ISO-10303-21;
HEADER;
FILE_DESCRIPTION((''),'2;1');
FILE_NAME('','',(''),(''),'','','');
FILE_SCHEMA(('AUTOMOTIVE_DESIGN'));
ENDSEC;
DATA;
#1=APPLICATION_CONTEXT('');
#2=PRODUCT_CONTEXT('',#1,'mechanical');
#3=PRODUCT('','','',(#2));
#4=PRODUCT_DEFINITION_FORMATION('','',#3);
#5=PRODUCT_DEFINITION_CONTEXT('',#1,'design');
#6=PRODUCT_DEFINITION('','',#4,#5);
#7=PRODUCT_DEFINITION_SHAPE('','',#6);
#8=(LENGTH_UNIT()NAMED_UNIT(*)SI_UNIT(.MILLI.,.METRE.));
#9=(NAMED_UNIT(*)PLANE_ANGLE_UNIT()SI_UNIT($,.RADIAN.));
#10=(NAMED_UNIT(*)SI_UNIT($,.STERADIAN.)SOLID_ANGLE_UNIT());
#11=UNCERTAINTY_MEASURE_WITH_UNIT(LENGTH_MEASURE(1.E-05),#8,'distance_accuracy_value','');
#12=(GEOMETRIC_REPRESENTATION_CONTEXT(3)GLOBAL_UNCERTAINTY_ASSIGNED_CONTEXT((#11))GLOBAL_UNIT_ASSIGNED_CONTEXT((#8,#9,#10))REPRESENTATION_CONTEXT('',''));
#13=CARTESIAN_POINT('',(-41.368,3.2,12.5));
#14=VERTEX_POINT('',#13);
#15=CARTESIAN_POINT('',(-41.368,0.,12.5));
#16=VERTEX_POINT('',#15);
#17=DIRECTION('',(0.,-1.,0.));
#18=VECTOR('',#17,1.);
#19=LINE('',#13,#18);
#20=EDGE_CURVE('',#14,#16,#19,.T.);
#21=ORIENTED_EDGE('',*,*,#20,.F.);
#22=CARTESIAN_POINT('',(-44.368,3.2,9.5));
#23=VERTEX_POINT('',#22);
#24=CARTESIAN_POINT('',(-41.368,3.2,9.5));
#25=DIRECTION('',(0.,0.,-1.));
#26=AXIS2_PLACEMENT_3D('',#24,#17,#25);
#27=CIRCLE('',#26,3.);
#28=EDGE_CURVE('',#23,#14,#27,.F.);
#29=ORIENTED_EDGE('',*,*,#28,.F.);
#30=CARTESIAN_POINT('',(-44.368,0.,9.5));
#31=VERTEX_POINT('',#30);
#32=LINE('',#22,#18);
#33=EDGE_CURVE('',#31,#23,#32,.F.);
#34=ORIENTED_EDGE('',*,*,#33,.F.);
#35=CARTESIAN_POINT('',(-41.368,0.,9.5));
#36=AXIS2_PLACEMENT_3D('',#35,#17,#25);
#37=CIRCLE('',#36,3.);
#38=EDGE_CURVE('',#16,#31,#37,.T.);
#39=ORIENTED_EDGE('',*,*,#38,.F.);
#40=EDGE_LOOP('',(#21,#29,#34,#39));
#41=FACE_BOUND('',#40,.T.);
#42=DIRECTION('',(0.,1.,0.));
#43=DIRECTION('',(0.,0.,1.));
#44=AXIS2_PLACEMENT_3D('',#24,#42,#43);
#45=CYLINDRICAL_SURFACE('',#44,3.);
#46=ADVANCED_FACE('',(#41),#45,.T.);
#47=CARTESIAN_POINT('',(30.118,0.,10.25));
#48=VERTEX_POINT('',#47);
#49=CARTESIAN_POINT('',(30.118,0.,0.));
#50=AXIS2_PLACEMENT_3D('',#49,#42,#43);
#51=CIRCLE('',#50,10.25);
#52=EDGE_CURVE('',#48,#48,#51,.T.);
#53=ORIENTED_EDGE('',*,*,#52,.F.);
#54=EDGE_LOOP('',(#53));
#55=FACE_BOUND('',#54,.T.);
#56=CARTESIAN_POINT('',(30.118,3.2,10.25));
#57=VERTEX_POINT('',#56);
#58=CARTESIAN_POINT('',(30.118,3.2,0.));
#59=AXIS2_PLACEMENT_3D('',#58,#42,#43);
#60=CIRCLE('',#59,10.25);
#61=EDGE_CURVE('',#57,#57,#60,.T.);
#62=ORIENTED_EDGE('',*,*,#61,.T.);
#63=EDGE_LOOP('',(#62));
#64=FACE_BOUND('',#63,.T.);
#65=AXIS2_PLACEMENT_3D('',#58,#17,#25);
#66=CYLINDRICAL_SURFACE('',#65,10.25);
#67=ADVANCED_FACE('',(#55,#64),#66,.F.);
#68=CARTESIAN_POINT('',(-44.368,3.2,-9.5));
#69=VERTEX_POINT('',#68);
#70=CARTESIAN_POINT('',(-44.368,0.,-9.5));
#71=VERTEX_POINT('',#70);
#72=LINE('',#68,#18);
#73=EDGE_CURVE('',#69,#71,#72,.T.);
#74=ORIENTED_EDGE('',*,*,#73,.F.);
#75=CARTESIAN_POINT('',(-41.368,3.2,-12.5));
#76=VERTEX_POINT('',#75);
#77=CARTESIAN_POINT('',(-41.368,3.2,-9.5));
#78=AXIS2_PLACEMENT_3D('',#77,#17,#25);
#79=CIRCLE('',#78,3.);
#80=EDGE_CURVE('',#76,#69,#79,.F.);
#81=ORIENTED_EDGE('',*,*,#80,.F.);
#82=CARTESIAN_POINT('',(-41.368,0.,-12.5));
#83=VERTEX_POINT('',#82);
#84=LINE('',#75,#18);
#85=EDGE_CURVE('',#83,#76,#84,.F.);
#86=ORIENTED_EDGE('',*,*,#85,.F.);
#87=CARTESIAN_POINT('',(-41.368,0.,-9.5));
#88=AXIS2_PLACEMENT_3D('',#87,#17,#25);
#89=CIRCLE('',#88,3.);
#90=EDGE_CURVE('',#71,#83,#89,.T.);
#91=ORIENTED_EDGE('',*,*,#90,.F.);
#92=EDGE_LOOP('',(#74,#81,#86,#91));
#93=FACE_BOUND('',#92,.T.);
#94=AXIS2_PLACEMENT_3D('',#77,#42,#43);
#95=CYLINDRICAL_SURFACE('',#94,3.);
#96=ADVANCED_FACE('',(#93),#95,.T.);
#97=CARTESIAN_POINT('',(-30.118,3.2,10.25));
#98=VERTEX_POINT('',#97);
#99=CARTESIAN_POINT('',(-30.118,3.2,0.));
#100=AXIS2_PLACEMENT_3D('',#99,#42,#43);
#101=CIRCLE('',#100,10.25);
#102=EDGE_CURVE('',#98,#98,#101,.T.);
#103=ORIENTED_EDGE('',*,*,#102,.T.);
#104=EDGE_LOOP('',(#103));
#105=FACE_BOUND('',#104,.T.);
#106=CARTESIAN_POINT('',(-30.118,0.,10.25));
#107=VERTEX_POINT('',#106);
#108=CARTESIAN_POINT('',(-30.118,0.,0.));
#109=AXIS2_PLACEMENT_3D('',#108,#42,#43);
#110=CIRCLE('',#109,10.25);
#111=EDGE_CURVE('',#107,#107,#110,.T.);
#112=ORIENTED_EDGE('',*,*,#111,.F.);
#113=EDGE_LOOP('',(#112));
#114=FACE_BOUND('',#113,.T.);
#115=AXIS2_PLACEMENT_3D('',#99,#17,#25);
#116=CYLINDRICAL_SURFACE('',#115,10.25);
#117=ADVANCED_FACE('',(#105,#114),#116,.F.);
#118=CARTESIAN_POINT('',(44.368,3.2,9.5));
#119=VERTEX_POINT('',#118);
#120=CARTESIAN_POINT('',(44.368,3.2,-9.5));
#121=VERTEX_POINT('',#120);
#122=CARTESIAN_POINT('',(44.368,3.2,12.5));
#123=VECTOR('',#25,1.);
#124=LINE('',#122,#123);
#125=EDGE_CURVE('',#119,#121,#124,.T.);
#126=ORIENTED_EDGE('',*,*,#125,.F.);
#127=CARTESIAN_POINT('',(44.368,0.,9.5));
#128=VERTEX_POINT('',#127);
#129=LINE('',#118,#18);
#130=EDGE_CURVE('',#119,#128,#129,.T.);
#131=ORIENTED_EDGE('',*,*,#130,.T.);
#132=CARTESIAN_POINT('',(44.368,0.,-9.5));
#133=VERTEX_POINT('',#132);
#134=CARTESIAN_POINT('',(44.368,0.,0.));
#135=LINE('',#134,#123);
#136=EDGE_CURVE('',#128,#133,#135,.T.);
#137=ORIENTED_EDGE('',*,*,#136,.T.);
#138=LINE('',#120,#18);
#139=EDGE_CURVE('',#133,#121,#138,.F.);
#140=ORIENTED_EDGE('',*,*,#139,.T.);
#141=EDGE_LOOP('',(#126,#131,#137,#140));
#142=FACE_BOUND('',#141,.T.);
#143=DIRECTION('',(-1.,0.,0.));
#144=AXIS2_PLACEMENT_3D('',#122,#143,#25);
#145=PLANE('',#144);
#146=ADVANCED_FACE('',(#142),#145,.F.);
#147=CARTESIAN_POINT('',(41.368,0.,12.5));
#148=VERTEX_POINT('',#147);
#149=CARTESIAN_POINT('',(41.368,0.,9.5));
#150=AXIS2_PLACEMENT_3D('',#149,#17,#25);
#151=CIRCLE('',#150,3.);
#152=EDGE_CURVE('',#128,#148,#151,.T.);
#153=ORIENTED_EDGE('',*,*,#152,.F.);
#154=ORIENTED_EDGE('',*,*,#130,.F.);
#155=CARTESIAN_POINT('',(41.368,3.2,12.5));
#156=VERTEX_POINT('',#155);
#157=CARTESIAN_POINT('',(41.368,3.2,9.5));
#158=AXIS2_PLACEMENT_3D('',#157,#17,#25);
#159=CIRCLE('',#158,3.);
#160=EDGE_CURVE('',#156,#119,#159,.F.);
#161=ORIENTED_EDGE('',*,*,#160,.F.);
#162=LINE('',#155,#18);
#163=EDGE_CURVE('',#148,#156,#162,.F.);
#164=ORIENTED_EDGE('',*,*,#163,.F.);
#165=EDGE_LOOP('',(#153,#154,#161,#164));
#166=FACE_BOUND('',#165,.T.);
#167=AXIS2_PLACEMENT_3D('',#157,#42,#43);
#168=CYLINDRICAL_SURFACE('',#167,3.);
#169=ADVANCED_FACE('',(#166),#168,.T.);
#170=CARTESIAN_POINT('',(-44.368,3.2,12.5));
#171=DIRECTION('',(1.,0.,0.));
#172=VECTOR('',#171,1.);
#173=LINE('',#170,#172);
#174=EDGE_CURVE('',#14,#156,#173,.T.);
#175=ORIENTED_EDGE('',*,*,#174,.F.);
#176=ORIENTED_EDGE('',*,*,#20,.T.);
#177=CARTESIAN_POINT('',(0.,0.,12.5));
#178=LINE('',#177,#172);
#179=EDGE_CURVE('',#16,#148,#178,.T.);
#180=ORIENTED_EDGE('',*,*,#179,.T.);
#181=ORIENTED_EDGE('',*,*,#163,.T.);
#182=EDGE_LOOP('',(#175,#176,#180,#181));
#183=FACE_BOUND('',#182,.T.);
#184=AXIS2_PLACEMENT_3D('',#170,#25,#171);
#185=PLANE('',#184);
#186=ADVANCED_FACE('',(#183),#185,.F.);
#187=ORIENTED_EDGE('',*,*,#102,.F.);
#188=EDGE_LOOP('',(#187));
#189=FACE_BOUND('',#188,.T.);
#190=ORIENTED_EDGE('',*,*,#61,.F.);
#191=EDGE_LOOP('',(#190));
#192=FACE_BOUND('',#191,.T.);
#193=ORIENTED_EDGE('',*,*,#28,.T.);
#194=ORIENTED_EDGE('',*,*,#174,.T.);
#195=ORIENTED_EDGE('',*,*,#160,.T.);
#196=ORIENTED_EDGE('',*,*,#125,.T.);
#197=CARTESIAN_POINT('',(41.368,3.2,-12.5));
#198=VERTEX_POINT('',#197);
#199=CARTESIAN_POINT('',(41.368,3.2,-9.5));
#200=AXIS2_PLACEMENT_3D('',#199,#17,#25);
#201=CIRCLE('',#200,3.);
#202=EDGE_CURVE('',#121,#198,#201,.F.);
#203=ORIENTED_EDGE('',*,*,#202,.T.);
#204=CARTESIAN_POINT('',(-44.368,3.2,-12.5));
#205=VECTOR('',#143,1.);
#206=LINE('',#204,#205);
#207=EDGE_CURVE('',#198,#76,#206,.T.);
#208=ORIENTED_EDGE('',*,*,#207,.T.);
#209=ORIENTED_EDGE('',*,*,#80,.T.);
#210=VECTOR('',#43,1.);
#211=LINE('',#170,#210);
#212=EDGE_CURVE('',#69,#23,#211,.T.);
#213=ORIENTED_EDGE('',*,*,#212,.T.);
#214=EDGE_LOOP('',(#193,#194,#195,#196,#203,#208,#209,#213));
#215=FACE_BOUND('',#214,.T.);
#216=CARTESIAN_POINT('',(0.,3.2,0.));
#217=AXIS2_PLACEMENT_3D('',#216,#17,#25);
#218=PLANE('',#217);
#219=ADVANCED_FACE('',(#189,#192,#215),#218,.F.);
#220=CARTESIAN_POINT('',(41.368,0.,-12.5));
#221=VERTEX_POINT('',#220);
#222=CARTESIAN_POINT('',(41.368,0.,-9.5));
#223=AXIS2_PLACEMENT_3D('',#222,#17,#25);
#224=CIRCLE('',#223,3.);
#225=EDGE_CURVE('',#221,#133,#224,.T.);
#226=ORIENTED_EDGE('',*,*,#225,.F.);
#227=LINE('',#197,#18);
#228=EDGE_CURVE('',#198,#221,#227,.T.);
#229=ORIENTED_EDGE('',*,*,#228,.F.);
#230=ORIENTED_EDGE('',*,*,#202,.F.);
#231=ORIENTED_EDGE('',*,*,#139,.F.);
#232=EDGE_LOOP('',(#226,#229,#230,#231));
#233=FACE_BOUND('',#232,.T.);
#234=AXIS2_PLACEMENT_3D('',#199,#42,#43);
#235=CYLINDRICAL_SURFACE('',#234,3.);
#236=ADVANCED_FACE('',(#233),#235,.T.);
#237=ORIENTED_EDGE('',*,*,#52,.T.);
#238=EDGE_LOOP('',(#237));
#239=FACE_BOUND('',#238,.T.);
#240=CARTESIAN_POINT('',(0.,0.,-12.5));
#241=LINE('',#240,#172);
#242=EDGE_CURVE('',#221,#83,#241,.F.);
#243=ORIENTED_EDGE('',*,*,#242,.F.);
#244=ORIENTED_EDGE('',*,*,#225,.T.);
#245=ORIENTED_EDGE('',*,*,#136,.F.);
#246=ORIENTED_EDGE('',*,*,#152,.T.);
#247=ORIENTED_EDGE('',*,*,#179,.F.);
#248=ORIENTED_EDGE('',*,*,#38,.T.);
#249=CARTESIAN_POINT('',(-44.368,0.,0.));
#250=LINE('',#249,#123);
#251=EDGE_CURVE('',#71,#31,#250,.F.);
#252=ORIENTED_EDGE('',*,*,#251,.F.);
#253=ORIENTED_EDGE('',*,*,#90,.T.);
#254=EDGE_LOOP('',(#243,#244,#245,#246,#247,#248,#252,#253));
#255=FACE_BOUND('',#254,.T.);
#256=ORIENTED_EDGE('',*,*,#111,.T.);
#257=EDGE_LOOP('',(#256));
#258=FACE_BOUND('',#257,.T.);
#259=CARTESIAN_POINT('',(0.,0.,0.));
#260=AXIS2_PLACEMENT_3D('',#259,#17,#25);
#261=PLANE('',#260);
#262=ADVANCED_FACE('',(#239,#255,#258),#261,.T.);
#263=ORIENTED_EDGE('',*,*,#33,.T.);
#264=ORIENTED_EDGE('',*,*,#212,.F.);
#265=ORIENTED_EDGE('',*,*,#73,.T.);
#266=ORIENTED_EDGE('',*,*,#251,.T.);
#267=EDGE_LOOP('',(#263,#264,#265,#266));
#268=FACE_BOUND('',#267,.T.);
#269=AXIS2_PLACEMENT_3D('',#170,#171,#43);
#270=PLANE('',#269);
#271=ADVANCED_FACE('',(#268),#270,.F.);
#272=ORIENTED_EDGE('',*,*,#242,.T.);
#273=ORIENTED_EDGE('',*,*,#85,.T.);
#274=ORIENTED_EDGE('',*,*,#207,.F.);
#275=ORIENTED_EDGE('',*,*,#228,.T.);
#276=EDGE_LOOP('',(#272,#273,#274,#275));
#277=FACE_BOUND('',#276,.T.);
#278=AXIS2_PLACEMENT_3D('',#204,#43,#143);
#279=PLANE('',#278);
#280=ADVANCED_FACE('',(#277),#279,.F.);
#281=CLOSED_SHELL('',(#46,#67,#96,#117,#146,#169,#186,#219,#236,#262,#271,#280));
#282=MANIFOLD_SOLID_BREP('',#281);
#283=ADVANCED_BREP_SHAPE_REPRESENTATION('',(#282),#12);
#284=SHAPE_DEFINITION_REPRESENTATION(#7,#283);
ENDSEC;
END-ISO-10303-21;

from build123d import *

# Parameters (mm, degrees)
SKETCH1_W           = 88.736
SKETCH1_H           = 25
SKETCH1_R           = 10.25
BOSS_EXTRUDE1_DEPTH = 3.2
FILLET1_R           = 3


with BuildPart() as part:
    # Sketch1 → Boss-Extrude1 (new body)
    with BuildSketch(Plane(origin=(0, 0, 0), x_dir=(1, 0, 0), z_dir=(0, 1, 0))):
        Rectangle(SKETCH1_W, SKETCH1_H)
        with Locations(Location((30.118, 0, 0), (0, 0, 270))):
            Circle(SKETCH1_R, mode=Mode.SUBTRACT)
        with Locations(Location((-30.118, 0, 0), (0, 0, 270))):
            Circle(SKETCH1_R, mode=Mode.SUBTRACT)
    extrude(amount=BOSS_EXTRUDE1_DEPTH)

    # Fillet1
    fillet1_edges = [part.edges().sort_by_distance(p)[0] for p in [
        (44.368, 1.6, -12.5),
        (44.368, 1.6, 12.5),
        (-44.368, 1.6, 12.5),
        (-44.368, 1.6, -12.5),
    ]]
    fillet(fillet1_edges, radius=FILLET1_R)


solid = part.part
